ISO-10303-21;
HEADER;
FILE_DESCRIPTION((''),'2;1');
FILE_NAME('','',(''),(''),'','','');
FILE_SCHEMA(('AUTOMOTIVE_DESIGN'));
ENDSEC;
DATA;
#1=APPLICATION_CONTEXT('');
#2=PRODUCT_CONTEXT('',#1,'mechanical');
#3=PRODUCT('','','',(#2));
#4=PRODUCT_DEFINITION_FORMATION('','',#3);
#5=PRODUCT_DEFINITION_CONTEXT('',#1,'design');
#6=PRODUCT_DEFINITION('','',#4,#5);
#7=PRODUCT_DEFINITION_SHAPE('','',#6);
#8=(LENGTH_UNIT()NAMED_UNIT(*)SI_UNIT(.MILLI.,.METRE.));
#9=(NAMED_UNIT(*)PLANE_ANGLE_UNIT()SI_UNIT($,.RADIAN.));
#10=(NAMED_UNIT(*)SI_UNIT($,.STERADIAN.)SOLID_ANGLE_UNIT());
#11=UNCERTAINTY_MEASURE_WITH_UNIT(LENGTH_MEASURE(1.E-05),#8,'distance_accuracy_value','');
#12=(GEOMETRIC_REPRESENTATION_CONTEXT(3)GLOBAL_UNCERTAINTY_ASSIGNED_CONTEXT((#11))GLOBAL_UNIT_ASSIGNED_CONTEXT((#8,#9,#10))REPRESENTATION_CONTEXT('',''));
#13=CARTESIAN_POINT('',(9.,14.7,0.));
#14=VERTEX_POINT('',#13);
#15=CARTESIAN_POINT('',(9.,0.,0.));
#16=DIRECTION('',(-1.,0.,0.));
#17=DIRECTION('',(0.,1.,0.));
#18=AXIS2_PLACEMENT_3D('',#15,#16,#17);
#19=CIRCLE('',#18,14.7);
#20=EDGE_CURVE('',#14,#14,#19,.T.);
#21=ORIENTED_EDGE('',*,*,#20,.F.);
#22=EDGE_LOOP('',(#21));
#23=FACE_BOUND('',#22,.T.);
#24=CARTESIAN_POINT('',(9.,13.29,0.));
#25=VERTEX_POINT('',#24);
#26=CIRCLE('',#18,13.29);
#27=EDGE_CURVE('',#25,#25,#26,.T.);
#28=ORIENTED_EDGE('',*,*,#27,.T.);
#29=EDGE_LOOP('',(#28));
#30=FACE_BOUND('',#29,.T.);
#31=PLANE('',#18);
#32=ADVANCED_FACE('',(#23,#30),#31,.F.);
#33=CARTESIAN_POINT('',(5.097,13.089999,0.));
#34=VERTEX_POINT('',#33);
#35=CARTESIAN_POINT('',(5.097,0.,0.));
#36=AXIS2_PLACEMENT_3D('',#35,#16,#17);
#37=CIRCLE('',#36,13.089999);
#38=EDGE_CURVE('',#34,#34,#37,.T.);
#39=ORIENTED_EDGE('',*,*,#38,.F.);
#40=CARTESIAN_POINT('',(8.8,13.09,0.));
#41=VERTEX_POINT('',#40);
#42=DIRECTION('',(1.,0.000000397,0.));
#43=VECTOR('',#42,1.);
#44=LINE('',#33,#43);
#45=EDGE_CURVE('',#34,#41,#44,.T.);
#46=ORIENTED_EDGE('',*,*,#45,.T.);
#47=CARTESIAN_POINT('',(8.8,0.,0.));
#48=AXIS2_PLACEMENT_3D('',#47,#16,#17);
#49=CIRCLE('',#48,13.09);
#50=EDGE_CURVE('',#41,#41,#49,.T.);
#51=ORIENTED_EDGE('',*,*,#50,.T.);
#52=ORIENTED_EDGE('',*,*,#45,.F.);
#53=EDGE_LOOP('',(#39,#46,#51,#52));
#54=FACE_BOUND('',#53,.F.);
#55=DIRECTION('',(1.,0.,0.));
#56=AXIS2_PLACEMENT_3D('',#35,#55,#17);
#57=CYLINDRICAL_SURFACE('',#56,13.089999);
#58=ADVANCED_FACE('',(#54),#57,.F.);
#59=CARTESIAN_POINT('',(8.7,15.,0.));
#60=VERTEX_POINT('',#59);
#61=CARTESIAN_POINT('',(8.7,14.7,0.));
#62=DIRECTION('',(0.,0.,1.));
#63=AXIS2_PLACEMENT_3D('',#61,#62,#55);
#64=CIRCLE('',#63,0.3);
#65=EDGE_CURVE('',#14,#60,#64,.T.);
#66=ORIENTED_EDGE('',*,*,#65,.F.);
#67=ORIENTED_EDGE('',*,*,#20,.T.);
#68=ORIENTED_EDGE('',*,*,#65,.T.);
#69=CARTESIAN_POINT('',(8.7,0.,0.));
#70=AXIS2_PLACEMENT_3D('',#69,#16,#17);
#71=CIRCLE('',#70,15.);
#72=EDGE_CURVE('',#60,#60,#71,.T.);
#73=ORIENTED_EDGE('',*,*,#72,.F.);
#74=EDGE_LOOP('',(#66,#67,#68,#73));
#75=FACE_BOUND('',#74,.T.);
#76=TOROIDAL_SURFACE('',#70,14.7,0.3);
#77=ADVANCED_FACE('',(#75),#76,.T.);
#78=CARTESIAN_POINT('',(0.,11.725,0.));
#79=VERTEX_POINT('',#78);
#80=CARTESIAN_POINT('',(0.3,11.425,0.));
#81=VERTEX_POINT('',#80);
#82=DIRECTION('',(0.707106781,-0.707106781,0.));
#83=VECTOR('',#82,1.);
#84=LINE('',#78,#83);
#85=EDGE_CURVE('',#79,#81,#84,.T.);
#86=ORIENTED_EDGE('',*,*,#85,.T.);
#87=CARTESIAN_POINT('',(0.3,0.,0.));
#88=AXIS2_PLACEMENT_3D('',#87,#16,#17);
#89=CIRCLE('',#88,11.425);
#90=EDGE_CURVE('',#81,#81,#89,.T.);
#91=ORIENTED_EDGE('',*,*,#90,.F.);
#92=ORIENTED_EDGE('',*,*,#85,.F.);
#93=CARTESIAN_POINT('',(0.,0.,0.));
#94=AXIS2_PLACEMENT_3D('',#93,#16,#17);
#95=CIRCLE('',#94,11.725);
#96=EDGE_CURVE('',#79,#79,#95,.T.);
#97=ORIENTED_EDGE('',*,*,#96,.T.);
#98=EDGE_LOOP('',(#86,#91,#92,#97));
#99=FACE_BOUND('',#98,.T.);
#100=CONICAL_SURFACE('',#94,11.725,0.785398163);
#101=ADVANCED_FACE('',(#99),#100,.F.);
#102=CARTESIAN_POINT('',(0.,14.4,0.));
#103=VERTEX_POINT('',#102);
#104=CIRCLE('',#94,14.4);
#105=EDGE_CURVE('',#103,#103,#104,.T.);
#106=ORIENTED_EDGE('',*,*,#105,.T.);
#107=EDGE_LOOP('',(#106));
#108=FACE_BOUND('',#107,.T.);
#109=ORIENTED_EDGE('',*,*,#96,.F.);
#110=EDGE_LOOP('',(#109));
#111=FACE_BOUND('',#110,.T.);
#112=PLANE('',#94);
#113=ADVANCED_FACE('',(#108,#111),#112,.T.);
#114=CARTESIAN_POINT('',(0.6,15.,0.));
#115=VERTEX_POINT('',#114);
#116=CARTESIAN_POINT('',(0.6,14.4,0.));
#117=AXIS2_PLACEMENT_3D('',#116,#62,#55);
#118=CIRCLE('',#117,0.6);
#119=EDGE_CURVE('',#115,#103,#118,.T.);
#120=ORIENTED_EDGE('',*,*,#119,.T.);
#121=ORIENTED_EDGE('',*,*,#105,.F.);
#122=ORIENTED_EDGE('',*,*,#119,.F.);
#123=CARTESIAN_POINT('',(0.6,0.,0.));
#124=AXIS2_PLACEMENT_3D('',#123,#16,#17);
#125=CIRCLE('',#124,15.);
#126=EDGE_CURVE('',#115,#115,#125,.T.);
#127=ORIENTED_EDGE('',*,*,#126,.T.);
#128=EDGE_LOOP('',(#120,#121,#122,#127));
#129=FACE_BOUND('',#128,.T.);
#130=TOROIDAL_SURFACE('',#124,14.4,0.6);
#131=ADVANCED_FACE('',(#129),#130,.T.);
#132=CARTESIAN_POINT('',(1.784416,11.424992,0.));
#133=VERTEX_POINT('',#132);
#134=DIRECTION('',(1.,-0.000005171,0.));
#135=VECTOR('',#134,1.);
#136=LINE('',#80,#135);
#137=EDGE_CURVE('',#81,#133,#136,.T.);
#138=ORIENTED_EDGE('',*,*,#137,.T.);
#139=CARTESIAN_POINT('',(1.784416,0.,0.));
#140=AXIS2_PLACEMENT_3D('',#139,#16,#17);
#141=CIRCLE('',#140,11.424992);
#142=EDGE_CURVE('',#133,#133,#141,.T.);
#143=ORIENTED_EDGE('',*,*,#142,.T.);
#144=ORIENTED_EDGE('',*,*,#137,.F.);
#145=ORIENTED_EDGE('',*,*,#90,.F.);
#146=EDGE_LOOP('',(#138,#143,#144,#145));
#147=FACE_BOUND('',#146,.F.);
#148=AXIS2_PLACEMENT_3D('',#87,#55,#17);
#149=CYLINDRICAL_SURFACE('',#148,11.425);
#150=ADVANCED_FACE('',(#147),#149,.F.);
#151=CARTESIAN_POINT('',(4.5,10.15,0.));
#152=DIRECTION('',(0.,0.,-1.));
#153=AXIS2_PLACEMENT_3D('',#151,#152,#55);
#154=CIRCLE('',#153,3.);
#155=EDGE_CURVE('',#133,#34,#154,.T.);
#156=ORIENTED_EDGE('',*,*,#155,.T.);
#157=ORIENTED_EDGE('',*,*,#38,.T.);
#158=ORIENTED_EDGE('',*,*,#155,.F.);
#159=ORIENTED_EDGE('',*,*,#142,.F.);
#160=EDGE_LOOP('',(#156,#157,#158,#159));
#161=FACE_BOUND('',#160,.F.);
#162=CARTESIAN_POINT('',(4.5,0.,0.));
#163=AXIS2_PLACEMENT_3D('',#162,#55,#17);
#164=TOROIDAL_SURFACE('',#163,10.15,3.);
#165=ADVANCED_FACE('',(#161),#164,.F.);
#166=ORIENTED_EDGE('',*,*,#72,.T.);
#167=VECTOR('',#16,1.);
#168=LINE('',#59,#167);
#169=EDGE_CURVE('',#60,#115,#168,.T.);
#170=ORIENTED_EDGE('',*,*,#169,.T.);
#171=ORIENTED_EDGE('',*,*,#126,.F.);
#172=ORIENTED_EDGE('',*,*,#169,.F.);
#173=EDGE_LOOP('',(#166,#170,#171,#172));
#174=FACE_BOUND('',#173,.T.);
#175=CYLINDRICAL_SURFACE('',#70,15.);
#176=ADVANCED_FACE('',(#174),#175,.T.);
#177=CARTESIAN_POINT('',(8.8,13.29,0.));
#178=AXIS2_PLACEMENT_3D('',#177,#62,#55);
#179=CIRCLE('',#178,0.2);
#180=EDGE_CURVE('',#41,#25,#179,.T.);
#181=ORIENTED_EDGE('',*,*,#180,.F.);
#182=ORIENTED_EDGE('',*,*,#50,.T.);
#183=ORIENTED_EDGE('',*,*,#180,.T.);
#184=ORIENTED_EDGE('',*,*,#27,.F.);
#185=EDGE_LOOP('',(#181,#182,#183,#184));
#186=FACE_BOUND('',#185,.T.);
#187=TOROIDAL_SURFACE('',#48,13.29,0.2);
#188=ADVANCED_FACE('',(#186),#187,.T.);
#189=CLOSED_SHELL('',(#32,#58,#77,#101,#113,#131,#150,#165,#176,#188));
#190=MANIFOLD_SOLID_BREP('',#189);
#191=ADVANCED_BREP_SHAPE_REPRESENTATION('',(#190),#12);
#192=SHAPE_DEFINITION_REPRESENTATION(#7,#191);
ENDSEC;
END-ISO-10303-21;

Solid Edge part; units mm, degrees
sketch "Sketch1" plane through (0, 0, 0) normal (0, 0, 1) x (1, 0, 0)
  line L0 (0, 11.725) -> (0.3, 11.425)
  line L1 (0.3, 11.425) -> (1.7844, 11.425)
  arc A0 (1.7844, 11.425) -> (5.097, 13.09) centre (4.5, 10.15) cw
  line L2 (5.097, 13.09) -> (8.8, 13.09)
  arc A1 (8.8, 13.09) -> (9, 13.29) centre (8.8, 13.29) ccw
  line L3 (9, 13.29) -> (9, 14.7)
  arc A2 (9, 14.7) -> (8.7, 15) centre (8.7, 14.7) ccw
  line L4 (8.7, 15) -> (0.6, 15)
  arc A3 (0.6, 15) -> (0, 14.4) centre (0.6, 14.4) ccw
  line L5 (0, 14.4) -> (0, 11.725)
revolve "RevolvedProtrusion1" add sketch "Sketch1" angle 360 about axis through (9, 0, 0) along (-1, 0, 0)
properties part number "SKF_7200 BECBP_PART2"
